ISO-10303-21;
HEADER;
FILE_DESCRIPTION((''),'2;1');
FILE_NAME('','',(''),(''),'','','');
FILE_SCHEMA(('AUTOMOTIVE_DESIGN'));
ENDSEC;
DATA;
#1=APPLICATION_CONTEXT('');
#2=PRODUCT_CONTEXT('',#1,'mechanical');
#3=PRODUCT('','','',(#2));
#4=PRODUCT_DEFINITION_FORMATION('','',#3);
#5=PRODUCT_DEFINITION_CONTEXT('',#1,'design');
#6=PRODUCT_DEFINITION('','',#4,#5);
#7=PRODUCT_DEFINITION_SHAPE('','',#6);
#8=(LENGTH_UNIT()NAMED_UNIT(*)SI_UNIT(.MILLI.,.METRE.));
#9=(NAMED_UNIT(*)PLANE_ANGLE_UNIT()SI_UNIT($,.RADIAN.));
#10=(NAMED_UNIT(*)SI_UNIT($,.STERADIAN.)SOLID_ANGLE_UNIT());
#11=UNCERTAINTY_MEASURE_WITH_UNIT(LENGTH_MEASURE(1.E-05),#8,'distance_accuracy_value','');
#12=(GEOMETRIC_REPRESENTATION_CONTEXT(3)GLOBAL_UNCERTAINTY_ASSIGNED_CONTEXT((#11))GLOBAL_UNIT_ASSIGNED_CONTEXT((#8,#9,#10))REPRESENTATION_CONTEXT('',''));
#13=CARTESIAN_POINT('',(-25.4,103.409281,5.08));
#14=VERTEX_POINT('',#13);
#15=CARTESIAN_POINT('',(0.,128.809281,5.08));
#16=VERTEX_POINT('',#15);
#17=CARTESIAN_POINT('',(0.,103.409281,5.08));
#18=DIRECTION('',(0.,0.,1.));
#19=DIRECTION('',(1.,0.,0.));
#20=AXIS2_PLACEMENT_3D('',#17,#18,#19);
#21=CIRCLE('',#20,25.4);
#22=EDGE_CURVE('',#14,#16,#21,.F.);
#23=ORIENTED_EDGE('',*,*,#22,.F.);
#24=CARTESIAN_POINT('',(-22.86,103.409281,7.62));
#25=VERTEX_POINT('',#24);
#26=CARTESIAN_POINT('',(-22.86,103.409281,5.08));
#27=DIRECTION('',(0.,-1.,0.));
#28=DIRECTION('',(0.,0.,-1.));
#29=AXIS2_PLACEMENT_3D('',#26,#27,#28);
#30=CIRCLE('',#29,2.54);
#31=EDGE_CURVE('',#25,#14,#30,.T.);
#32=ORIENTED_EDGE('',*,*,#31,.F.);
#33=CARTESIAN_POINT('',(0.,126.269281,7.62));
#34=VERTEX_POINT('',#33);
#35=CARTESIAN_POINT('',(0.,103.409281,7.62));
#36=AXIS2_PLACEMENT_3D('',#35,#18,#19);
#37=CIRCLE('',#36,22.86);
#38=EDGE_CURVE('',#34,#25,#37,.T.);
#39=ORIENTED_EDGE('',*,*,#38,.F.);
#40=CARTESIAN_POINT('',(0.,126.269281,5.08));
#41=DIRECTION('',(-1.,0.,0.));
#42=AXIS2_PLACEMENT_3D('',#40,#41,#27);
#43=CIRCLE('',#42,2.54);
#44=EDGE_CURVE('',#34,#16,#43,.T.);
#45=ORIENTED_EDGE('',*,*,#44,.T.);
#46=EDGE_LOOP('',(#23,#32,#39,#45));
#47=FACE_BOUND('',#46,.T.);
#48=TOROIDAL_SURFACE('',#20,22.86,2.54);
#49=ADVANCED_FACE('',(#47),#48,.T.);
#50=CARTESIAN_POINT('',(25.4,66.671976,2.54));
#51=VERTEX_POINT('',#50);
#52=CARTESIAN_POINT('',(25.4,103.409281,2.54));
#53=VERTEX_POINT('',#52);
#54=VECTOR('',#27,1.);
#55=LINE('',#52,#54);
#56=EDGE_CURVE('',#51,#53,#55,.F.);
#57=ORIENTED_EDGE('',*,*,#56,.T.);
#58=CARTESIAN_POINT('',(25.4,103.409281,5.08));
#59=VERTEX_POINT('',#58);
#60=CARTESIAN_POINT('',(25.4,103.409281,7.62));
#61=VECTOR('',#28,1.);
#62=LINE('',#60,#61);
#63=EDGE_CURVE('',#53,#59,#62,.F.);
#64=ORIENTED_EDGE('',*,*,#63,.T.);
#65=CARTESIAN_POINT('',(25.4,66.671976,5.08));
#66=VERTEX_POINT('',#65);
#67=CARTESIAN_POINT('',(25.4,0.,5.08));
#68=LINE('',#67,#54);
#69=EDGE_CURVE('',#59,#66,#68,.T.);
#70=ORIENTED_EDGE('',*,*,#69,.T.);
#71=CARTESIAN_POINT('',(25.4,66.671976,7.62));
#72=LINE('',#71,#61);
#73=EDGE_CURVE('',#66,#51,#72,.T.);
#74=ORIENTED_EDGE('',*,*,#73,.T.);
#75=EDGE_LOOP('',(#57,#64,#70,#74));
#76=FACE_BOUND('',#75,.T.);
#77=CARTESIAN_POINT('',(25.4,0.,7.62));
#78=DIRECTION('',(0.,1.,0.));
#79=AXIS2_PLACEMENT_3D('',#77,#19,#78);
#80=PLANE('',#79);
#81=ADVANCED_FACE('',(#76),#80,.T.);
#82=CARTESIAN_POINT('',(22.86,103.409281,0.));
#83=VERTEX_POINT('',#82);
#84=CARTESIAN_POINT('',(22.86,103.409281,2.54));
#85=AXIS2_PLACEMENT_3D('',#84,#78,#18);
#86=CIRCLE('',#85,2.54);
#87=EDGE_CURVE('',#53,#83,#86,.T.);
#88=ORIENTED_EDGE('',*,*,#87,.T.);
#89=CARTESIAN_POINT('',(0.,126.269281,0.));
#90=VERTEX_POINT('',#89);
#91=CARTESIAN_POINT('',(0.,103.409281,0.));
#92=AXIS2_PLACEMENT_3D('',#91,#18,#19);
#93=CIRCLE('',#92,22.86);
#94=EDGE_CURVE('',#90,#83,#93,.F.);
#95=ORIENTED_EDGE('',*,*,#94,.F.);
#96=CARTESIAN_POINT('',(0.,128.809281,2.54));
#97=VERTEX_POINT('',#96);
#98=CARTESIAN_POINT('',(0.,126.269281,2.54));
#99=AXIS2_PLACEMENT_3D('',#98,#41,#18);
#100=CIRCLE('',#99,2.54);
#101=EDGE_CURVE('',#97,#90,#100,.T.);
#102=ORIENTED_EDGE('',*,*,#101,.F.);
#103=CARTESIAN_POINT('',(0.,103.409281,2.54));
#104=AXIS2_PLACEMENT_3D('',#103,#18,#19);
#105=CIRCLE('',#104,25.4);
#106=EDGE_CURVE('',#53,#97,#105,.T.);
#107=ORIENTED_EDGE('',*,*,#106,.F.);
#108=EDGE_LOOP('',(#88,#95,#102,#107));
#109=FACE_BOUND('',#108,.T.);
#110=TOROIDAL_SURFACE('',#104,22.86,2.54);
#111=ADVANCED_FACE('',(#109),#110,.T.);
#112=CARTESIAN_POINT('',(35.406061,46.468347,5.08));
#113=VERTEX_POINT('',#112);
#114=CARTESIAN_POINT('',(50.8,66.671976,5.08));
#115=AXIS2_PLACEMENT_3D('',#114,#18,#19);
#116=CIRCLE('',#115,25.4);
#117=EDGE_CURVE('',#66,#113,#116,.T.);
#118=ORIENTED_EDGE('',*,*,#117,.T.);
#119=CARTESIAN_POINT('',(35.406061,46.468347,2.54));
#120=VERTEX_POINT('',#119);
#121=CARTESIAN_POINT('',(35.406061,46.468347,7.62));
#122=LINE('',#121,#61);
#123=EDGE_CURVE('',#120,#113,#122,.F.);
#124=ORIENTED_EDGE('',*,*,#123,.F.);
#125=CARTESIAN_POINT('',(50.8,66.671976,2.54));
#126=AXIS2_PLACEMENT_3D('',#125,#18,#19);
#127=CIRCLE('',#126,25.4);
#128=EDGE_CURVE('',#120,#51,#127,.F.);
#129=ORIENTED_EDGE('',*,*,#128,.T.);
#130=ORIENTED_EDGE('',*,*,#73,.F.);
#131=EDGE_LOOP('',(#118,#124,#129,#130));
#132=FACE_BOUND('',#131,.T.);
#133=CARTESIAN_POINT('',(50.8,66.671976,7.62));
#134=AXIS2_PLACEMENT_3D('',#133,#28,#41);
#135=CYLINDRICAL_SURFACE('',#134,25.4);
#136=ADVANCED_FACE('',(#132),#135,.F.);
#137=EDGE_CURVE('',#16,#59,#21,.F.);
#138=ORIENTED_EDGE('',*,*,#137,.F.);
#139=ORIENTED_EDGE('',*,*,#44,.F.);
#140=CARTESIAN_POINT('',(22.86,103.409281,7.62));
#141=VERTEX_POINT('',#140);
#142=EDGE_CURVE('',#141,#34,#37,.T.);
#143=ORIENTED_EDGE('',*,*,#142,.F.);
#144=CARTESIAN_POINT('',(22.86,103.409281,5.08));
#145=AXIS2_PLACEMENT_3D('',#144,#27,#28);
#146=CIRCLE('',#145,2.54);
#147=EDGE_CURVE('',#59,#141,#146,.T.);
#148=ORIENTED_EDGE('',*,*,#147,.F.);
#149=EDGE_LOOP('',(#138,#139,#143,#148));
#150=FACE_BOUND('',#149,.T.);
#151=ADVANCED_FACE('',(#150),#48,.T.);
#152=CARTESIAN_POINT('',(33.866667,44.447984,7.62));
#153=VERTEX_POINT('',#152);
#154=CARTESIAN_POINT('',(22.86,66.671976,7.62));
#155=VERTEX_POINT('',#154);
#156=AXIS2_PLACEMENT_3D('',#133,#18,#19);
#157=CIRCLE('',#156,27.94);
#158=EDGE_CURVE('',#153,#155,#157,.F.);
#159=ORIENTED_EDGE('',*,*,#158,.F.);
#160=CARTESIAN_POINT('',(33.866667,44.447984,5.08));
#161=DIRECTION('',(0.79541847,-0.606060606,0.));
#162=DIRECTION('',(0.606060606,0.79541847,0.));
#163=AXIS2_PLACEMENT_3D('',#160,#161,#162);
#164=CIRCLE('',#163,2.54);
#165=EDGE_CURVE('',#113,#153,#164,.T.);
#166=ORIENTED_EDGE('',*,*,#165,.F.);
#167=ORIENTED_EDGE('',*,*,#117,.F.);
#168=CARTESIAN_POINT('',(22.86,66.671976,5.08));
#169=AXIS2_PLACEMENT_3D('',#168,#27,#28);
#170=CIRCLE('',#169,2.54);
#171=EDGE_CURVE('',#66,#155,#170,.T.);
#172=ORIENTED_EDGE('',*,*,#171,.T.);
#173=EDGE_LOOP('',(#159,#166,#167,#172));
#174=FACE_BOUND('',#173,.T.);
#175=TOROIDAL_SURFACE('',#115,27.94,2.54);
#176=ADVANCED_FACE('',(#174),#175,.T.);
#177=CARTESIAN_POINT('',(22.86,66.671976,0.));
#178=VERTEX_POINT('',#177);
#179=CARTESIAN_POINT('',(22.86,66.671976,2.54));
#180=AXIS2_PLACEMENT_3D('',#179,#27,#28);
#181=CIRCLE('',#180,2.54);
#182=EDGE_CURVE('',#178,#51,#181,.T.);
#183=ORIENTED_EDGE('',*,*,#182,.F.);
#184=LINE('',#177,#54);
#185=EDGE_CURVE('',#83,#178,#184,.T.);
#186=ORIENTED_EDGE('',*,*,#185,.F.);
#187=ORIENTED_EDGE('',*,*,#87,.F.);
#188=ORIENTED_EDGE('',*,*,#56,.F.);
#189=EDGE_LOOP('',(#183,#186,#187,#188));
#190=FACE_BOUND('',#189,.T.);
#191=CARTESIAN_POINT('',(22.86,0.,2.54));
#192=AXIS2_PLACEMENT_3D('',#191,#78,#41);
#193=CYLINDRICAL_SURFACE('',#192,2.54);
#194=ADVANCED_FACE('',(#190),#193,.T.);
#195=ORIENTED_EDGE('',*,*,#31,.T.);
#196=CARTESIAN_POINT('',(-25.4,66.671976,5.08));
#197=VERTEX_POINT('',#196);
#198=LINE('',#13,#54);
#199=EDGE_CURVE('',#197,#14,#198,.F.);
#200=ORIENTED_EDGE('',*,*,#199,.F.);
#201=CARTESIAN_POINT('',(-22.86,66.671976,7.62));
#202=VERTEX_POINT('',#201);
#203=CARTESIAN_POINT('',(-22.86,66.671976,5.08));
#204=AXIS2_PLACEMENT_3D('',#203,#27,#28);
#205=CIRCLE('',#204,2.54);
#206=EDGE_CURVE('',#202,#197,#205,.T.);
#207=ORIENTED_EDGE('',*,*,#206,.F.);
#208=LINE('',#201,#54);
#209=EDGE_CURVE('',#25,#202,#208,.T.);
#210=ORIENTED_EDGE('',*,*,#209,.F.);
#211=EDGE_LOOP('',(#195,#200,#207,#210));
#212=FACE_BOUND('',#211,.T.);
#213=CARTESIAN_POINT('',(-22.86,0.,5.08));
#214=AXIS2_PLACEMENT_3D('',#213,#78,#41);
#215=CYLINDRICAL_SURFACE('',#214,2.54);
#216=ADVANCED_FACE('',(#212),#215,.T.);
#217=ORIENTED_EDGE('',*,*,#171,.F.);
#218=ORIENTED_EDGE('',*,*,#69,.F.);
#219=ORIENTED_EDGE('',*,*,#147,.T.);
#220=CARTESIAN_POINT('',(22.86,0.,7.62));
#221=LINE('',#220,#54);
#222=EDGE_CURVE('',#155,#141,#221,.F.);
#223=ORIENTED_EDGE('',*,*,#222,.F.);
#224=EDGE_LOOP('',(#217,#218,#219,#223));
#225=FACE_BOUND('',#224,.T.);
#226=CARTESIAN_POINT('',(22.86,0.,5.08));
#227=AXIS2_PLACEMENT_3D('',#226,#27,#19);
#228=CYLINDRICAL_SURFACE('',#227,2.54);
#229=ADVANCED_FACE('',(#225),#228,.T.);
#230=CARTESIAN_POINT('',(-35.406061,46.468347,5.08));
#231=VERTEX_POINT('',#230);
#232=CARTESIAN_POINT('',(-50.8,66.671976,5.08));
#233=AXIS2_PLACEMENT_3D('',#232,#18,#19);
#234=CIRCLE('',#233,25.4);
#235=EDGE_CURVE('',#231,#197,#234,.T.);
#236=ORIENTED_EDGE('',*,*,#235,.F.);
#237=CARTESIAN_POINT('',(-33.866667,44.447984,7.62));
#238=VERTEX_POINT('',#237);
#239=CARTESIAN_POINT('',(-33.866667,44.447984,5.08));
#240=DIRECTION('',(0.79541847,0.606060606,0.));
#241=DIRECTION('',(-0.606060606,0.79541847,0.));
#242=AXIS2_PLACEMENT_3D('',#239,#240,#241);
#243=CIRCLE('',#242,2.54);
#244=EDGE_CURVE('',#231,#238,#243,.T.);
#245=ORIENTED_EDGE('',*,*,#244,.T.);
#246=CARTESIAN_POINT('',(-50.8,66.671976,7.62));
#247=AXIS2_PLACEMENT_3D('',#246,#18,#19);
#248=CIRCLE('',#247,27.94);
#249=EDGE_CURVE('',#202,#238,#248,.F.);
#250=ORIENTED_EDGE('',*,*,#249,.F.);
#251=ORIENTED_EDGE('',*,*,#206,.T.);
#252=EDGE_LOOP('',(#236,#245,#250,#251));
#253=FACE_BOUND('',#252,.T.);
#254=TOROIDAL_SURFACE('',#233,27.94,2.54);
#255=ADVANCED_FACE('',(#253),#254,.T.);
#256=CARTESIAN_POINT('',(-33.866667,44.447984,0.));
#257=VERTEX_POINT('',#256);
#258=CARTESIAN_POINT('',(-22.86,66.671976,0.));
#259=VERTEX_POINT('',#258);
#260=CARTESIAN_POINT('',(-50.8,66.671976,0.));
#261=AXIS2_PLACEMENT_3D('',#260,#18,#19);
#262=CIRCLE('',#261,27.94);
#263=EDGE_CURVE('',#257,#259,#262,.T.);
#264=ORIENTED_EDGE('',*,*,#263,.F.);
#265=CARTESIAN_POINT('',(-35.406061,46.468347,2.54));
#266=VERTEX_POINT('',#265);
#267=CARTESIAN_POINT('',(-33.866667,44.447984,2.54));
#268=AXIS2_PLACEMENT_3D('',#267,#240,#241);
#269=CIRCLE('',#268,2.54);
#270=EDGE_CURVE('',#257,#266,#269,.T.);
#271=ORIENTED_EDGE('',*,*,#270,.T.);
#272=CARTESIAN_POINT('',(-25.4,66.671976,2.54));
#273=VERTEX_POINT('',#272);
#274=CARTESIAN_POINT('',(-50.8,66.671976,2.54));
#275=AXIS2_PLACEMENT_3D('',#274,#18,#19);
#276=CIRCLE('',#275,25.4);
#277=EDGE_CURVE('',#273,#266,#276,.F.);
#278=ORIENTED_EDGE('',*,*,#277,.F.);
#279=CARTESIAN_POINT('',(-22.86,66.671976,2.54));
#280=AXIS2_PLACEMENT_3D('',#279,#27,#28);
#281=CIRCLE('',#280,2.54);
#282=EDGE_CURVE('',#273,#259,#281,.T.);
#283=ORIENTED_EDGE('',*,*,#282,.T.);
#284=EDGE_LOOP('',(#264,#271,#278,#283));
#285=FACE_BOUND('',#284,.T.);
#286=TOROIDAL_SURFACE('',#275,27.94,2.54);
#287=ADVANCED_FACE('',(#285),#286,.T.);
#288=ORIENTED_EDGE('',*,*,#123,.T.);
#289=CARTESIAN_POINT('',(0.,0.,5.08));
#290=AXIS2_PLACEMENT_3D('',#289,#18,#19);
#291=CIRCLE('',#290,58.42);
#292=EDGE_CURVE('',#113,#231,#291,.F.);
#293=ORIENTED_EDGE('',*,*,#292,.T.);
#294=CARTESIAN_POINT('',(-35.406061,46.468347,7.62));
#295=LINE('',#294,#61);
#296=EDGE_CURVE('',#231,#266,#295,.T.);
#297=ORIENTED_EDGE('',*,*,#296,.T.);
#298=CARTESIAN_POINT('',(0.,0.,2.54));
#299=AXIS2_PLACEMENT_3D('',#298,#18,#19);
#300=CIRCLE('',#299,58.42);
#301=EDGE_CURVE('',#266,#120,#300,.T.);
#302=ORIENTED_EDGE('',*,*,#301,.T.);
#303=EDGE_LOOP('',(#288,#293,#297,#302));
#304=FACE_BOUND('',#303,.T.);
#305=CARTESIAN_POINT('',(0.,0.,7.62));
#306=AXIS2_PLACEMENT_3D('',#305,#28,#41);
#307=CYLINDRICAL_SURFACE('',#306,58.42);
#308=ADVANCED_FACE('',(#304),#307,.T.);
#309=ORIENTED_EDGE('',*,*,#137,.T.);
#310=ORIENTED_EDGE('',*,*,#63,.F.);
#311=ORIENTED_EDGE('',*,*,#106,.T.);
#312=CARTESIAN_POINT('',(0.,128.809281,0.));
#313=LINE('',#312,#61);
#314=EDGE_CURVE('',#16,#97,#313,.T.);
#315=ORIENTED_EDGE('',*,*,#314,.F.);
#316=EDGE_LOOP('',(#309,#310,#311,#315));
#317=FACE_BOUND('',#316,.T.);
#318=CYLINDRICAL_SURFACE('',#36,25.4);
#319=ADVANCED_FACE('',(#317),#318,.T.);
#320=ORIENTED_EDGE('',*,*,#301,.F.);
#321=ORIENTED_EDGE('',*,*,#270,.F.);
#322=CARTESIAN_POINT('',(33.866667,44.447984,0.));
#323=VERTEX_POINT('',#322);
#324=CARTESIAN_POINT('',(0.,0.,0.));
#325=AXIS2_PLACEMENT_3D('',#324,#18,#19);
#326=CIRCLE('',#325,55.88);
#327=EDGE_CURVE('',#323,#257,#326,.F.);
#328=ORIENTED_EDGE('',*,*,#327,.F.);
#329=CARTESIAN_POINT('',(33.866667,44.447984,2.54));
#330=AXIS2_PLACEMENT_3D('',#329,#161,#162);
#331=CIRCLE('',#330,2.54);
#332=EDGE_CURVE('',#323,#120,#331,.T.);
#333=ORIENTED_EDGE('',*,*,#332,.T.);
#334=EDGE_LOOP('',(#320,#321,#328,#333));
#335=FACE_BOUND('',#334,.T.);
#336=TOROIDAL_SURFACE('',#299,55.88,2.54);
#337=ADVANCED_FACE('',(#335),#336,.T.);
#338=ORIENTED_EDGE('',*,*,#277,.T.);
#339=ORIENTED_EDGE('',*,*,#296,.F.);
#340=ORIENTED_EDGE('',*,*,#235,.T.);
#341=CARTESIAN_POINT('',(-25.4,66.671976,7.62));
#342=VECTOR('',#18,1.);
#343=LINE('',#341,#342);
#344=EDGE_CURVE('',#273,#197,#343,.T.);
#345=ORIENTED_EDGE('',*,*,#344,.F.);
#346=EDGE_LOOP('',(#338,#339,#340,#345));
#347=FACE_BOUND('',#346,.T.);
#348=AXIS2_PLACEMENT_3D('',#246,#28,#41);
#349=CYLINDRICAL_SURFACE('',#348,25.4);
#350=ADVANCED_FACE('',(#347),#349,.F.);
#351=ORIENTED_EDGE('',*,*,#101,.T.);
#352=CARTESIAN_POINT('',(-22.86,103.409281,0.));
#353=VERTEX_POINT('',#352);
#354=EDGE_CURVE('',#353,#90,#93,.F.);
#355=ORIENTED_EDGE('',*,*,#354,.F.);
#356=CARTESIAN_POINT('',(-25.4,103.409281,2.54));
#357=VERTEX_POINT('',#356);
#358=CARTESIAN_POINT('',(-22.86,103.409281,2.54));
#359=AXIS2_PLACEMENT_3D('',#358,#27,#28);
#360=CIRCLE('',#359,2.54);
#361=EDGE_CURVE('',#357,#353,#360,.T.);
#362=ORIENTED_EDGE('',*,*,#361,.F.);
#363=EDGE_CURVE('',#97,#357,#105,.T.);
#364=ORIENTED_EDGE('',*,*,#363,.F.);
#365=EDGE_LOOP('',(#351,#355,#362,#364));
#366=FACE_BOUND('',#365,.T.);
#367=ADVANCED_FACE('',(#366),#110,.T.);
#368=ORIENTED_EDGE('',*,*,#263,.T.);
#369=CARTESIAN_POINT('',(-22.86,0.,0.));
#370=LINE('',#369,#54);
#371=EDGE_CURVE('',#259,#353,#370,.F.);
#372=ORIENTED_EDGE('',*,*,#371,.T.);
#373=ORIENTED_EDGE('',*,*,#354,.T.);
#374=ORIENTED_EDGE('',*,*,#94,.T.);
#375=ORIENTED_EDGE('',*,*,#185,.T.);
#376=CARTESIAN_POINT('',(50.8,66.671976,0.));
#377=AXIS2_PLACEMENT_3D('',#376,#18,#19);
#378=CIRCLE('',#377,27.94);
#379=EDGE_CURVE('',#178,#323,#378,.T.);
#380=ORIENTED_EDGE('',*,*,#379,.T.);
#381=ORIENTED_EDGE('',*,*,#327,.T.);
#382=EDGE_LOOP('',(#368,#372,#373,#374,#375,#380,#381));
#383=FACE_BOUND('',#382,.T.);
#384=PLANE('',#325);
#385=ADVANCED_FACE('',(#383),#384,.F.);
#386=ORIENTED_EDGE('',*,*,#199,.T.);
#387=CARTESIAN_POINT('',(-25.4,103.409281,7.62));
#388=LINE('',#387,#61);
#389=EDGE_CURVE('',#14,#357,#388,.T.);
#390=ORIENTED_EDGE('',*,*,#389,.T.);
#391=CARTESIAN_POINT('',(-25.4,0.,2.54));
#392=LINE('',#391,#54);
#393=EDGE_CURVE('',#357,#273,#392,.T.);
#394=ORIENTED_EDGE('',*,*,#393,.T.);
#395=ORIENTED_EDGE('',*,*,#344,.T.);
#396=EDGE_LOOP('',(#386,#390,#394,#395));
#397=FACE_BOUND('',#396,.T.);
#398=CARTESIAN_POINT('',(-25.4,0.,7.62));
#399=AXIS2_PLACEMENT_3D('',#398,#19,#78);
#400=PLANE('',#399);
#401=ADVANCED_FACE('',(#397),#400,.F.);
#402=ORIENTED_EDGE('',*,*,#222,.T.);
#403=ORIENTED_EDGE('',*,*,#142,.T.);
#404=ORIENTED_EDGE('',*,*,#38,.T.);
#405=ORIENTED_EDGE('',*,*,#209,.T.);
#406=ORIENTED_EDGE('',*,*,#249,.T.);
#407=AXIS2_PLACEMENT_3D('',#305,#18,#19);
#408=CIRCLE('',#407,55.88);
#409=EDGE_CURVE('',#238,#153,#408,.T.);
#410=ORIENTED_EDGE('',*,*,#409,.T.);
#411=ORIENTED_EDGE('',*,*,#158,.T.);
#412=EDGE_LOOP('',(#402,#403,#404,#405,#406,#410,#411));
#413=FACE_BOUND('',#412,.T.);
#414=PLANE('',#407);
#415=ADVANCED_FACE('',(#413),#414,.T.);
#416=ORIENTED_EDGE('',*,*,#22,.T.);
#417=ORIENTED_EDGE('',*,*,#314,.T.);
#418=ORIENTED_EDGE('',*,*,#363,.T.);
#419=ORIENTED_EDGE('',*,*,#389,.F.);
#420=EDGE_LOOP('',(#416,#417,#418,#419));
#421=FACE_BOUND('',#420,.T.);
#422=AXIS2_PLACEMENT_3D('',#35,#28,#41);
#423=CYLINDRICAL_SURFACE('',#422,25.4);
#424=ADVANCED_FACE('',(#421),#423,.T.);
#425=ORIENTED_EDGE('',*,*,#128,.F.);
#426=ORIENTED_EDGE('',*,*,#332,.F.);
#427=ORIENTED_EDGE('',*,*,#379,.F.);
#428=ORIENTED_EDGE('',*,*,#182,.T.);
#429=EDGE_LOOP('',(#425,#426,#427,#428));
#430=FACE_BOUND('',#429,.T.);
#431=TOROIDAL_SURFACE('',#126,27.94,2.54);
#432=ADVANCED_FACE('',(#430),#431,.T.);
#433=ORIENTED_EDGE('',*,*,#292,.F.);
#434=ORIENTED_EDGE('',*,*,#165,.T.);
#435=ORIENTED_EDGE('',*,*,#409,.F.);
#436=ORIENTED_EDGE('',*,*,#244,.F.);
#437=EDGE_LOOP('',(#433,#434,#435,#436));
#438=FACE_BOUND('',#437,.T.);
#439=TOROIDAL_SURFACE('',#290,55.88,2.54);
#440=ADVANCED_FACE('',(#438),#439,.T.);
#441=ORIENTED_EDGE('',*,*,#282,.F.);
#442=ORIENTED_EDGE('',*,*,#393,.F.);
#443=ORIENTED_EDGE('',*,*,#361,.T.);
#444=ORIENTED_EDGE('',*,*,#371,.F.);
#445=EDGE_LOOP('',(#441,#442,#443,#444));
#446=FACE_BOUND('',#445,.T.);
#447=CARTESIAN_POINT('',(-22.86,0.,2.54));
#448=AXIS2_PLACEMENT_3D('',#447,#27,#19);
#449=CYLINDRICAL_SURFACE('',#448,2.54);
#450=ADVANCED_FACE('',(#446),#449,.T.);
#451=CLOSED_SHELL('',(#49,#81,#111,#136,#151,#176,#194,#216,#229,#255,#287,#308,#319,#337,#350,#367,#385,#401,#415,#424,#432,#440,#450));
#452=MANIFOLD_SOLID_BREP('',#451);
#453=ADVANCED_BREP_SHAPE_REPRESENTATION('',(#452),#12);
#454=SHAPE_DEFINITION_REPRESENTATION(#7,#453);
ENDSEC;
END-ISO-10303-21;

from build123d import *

# Parameters (mm, degrees)
SKETCH1_R           = 58.42
BOSS_EXTRUDE1_DEPTH = 7.62
FILLET1_R           = 25.4
FILLET2_R           = 25.4
FILLET3_R           = 2.54


with BuildPart() as part:
    # Sketch1 → Boss-Extrude1 (new body)
    with BuildSketch(Plane.XY):
        Circle(SKETCH1_R)
        with BuildLine():
            Line((25.4, 52.60928055), (25.4, 128.80928055))
            Line((25.4, 128.80928055), (-25.4, 128.80928055))
            Line((-25.4, 128.80928055), (-25.4, 52.60928055))
            ThreePointArc((-25.4, 52.60928055), (0, 58.42), (25.4, 52.60928055))
        make_face()
    extrude(amount=BOSS_EXTRUDE1_DEPTH)

    # Fillet1
    fillet1_edges = [part.edges().sort_by_distance(p)[0] for p in [
        (-25.4, 128.80928055, 3.81),
        (25.4, 128.80928055, 3.81),
    ]]
    fillet(fillet1_edges, radius=FILLET1_R - 0.0001)  # a hair under: the kernel refuses the full size

    # Fillet2
    fillet2_edges = [part.edges().sort_by_distance(p)[0] for p in [
        (-25.4, 52.60928055, 3.81),
        (25.4, 52.60928055, 3.81),
    ]]
    fillet(fillet2_edges, radius=FILLET2_R)

    # Fillet3
    fillet3_edges = [part.edges().sort_by_distance(p)[0] for p in [
        (-25.4, 85.040678336, 0),
        (-25.4, 85.040678336, 7.62),
        (25.4, 85.040678336, 0),
        (17.960541531, 121.369822082, 0),
        (-17.960541531, 121.369822082, 0),
        (25.4, 85.040678336, 7.62),
        (17.960541531, 121.369822082, 7.62),
        (-17.960541531, 121.369822082, 7.62),
        (0, -58.42, 0),
        (0, -58.42, 7.62),
        (28.038562649, 55.399133992, 0),
        (28.038562649, 55.399133992, 7.62),
        (-28.038562649, 55.399133992, 0),
        (-28.038562649, 55.399133992, 7.62),
    ]]
    fillet(fillet3_edges, radius=FILLET3_R)


solid = part.part
